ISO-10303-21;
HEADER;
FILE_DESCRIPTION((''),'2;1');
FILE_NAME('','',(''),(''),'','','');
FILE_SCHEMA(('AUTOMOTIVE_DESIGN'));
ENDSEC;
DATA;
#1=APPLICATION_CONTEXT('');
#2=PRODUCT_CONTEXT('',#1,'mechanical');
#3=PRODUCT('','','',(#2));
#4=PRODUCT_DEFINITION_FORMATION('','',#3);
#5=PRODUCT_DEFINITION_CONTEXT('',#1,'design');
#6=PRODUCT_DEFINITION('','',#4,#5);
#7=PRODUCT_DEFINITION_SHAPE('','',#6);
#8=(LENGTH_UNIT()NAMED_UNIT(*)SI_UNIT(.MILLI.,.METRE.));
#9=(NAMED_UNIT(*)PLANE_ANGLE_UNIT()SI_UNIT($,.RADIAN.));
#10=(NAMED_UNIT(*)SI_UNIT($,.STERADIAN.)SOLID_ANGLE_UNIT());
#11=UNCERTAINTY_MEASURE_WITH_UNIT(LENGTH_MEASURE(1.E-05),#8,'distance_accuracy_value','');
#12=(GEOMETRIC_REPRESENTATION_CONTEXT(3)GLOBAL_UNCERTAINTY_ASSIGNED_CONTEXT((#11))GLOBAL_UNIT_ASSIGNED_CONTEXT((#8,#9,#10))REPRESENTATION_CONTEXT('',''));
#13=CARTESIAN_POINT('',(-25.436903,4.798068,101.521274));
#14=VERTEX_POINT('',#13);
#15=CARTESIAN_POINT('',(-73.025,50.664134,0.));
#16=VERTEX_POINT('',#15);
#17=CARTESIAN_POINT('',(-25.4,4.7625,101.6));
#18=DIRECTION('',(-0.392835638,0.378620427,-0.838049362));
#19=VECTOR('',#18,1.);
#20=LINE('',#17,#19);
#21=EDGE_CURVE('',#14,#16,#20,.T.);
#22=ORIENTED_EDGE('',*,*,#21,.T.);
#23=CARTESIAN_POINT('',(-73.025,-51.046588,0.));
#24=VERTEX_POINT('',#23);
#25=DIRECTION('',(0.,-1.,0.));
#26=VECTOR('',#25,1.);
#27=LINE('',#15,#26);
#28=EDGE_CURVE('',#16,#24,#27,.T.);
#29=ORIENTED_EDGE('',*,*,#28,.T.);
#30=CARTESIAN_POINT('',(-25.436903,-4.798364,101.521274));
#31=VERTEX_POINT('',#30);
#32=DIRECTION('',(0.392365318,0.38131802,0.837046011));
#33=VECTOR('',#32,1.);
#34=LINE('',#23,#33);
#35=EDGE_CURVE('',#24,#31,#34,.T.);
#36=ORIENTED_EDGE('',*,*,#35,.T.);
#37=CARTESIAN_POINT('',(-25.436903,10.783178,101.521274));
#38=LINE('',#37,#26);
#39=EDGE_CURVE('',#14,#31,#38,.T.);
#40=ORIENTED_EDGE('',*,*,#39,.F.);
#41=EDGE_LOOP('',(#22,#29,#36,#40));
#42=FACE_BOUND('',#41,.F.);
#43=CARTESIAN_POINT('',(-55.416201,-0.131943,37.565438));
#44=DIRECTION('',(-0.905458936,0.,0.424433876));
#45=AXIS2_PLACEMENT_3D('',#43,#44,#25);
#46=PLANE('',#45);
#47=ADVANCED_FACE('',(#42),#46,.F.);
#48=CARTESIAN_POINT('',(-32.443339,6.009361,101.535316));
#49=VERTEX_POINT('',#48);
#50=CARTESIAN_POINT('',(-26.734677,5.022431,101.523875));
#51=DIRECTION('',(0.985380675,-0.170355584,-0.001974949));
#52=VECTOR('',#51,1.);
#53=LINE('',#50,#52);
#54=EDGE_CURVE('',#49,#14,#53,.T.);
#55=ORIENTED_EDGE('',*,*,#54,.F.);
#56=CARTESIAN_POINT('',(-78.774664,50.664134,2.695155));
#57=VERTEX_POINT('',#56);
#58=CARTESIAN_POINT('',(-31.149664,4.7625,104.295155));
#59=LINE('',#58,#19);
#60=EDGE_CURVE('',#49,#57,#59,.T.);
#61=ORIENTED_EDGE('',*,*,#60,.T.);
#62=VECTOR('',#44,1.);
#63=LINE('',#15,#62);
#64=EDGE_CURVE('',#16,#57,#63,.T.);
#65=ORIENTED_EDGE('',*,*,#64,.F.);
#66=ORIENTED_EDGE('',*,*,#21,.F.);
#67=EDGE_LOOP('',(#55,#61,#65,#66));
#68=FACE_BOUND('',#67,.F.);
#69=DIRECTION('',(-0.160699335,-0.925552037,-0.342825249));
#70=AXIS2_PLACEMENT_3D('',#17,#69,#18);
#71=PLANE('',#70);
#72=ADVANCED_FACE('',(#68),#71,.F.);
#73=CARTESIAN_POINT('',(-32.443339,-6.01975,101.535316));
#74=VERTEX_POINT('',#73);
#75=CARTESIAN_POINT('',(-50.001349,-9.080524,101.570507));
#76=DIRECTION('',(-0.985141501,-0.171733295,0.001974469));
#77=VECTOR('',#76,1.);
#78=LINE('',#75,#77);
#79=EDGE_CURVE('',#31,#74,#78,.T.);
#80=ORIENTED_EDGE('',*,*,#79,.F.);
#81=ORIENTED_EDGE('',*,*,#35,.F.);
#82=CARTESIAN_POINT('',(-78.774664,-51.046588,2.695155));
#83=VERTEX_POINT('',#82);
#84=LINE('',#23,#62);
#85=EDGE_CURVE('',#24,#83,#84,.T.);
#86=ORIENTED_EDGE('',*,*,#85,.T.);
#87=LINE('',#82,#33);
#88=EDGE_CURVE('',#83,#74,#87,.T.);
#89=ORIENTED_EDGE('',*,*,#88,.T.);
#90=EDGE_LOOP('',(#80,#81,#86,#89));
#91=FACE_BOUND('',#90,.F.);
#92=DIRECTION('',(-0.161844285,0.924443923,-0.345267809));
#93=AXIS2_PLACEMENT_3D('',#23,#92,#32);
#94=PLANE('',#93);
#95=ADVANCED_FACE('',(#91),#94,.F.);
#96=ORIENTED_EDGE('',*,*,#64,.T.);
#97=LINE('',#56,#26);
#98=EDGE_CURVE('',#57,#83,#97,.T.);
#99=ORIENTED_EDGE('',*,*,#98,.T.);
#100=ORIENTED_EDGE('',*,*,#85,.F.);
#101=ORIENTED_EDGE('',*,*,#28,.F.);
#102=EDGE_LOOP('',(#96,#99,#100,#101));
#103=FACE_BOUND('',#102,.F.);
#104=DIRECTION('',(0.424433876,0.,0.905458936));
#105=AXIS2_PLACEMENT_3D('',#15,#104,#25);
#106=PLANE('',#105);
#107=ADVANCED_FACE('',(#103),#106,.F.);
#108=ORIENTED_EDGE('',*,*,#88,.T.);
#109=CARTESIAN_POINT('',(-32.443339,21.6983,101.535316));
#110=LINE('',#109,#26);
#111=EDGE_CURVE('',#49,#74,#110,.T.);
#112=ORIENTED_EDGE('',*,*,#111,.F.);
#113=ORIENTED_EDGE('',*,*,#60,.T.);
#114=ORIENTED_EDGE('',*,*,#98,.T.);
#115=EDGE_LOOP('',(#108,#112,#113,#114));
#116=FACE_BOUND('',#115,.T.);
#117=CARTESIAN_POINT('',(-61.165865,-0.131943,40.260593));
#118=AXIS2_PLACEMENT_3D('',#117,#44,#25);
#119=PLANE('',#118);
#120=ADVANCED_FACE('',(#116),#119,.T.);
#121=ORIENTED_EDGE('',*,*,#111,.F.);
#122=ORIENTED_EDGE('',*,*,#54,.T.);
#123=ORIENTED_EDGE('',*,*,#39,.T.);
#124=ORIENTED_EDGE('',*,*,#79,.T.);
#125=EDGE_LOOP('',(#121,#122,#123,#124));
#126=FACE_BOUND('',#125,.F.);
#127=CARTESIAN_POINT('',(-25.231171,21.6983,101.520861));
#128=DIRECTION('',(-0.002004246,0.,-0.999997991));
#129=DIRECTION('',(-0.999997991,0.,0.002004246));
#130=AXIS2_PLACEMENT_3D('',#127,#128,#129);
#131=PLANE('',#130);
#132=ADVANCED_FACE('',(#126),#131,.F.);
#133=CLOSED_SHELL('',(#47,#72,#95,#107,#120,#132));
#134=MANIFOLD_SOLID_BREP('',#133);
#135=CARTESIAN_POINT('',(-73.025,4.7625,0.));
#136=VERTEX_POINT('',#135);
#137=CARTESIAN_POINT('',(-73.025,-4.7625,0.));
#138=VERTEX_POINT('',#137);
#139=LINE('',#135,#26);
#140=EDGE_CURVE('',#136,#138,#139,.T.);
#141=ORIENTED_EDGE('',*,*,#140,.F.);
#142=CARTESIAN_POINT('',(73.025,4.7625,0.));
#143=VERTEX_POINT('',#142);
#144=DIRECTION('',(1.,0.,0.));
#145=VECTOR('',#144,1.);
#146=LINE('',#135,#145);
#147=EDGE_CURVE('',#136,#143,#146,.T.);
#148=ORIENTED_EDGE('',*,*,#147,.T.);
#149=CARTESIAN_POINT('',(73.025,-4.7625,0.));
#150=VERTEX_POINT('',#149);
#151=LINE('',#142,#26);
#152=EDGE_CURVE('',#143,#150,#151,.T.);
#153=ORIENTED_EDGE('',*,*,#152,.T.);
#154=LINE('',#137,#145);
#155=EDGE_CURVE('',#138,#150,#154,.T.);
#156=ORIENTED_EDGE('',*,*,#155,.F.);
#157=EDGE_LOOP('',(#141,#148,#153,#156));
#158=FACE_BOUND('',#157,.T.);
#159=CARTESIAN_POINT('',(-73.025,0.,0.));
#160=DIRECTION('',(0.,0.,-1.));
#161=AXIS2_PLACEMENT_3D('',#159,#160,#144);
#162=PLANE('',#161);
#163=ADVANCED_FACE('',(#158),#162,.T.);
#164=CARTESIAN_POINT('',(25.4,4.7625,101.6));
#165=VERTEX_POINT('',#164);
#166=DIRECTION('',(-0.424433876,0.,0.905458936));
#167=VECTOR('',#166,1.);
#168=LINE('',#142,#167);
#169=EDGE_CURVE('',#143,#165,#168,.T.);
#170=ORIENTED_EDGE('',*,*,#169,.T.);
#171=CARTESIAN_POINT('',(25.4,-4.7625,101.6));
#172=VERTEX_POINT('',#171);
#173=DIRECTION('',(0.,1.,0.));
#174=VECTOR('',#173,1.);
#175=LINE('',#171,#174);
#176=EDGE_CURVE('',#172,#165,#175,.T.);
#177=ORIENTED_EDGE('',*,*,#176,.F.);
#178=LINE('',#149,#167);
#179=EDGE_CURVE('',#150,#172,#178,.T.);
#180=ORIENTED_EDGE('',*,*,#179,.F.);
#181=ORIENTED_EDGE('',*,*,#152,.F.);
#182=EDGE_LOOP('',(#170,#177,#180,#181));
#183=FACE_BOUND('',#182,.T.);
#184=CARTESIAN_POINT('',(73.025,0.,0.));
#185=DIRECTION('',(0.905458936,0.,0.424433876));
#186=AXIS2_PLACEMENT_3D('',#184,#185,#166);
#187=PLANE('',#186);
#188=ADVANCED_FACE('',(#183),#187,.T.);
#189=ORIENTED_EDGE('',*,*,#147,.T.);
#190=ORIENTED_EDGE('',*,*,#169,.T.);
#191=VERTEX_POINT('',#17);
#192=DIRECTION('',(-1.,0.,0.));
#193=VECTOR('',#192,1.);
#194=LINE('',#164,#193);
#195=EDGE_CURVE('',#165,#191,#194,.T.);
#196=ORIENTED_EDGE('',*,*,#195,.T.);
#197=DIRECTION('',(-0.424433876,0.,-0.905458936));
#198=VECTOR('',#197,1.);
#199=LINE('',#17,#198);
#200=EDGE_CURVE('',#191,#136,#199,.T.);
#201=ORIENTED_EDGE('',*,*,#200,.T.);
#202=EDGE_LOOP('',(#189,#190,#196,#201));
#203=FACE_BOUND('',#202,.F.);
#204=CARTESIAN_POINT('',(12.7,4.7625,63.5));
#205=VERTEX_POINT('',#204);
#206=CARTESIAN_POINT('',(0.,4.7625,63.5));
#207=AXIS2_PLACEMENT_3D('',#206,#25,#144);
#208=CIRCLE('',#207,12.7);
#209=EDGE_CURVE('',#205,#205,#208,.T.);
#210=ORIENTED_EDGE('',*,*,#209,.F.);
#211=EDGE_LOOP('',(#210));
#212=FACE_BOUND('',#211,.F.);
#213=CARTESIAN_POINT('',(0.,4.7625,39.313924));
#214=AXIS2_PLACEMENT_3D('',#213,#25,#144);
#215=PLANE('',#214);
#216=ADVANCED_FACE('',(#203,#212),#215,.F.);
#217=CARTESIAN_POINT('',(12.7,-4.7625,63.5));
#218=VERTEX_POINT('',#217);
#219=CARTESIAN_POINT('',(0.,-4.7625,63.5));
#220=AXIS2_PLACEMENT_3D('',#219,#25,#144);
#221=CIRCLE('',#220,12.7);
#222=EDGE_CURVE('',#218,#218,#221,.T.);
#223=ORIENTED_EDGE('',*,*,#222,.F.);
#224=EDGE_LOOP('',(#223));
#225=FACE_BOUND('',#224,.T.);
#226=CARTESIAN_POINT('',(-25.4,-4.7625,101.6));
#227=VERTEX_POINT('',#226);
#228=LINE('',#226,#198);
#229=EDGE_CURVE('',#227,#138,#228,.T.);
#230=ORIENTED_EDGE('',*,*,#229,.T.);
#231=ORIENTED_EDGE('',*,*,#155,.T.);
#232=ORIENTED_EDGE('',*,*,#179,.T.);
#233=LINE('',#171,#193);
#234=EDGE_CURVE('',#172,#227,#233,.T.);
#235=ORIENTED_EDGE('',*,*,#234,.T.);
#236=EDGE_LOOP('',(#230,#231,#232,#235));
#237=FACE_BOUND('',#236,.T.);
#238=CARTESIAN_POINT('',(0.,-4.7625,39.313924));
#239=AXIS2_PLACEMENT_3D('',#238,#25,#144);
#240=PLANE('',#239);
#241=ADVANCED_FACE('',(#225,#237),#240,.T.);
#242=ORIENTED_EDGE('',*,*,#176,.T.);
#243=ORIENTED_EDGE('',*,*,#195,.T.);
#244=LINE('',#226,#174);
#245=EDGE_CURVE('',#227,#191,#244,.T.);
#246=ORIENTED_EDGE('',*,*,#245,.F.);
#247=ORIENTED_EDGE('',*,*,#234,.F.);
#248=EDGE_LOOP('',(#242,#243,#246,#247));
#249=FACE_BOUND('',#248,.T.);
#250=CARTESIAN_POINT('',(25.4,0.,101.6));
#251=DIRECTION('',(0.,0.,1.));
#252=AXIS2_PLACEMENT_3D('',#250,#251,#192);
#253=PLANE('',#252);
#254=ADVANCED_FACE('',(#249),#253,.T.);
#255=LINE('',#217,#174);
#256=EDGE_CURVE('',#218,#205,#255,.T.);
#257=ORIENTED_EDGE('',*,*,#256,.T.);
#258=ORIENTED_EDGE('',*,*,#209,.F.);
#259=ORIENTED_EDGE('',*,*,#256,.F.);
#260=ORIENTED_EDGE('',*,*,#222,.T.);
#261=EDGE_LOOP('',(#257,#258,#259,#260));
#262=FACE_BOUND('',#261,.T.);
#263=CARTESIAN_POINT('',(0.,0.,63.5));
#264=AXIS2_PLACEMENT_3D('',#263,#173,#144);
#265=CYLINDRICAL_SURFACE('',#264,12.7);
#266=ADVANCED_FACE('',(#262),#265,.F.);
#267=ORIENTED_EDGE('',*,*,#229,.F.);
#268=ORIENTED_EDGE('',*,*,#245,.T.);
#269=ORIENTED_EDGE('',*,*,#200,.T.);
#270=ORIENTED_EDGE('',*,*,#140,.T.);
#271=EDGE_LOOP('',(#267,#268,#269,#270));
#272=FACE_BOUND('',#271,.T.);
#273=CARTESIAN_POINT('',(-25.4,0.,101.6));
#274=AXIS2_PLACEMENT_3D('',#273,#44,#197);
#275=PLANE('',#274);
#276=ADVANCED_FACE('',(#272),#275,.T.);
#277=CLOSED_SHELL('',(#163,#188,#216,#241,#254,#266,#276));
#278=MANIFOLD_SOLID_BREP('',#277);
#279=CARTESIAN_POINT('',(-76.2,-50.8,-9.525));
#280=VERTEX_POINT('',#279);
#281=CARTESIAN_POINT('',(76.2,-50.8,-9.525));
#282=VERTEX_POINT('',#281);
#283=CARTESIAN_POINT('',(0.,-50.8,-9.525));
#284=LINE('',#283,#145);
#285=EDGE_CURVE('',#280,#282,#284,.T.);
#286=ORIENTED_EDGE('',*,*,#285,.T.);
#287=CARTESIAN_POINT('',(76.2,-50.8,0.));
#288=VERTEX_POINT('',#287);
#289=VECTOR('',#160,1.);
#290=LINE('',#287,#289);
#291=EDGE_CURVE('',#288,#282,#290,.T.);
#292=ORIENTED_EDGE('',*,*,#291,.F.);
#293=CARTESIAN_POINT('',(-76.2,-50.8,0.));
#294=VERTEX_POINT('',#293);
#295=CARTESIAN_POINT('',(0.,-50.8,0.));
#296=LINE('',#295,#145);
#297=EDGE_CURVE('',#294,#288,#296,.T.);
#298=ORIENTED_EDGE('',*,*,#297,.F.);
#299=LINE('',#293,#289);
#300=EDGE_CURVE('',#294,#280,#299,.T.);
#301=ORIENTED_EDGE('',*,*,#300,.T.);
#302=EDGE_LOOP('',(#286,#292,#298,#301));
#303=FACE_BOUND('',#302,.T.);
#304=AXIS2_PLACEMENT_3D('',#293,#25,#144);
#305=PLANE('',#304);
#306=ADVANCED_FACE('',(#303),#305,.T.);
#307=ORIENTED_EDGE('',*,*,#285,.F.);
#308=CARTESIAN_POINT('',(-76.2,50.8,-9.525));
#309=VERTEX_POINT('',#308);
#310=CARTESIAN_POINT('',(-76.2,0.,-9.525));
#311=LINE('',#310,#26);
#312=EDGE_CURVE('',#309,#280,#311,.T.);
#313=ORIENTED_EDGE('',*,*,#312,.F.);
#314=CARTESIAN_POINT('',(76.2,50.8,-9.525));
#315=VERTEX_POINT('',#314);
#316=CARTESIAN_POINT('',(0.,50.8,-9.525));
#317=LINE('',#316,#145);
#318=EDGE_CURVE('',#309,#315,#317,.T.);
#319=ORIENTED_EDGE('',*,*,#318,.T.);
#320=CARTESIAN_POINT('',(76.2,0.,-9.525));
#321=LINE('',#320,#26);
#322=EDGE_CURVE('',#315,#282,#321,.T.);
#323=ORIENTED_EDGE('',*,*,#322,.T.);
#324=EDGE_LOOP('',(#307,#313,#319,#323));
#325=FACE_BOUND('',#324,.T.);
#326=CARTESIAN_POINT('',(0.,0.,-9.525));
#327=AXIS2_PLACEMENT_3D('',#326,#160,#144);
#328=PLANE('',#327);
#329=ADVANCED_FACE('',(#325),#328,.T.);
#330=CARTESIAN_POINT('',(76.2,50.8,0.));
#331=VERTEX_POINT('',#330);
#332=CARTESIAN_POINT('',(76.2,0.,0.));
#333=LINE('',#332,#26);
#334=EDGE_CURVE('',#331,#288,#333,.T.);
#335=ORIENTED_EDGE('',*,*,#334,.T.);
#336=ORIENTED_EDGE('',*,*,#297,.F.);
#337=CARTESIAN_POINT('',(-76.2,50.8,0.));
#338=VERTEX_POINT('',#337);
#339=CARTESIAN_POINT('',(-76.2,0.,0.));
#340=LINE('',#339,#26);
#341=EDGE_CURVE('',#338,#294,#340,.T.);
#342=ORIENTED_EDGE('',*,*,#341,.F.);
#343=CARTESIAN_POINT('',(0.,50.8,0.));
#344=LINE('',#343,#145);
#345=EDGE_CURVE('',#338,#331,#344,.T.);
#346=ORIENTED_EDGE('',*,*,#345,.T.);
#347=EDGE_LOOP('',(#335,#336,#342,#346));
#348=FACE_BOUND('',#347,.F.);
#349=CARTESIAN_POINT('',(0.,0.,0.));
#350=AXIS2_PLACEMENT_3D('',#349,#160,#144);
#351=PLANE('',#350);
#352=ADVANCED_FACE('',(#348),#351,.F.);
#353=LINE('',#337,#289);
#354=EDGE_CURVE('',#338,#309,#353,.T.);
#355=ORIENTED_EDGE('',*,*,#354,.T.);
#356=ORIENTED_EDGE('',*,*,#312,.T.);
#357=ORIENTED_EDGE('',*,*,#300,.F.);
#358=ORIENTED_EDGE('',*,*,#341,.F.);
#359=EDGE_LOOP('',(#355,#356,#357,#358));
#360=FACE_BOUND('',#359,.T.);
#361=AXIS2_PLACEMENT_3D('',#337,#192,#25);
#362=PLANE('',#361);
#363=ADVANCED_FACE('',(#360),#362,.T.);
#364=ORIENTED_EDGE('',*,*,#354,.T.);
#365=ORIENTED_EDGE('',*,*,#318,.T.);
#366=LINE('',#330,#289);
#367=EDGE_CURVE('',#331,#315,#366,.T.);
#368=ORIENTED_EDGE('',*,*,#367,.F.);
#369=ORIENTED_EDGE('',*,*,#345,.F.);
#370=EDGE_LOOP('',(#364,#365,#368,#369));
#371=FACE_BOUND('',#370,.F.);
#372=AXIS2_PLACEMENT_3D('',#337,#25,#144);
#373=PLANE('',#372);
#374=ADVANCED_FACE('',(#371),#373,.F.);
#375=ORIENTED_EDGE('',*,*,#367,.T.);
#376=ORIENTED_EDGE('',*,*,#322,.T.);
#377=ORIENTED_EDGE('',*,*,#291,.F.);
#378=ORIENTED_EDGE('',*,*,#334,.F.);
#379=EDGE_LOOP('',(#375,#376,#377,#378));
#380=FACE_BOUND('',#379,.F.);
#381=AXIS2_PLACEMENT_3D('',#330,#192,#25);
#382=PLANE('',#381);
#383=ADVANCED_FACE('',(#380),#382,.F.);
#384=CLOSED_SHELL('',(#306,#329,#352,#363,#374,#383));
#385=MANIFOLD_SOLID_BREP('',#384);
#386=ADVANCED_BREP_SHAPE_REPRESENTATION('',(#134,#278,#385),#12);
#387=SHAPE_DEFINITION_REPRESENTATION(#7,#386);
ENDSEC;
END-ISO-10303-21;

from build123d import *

# Parameters (mm, degrees)
F0_R        = 12.7
F1_DEPTH    = 4.7625
F2_W        = 152.4
F2_H        = 101.6
F3_DEPTH    = 9.525
F5_DEPTH    = 6.35
F6_T1_DEPTH = 43.3965999996


# Not quite as in the source:
# - a fillet or chamfer that OpenCascade refuses, or shapes differently, is made with other operations: its cross-section is extruded or revolved along the edge and cut away or added


with BuildPart() as f1:
    # F0 (on Front) → F1 (new body, symmetric)
    with BuildSketch(Plane.XZ):
        Polygon((-25.4, 101.6), (-73.025, 0), (73.025, 0), (25.4, 101.6), align=None)
        with Locations((0, 63.5)):
            Circle(F0_R, mode=Mode.SUBTRACT)
    extrude(amount=F1_DEPTH, both=True)


with BuildPart() as f3:
    # F2 (on face) → F3 (new body)
    with BuildSketch(Plane(origin=(0, 0, 0), x_dir=(1, 0, 0), z_dir=(0, 0, -1))):
        Rectangle(F2_W, F2_H)
    extrude(amount=F3_DEPTH)


with BuildPart() as f5:
    # F4 (on face) → F5 (new body)
    with BuildSketch(Plane(origin=(-59.8699759808, 0, 28.064051241), x_dir=(0, -1, 0), z_dir=(-0.905458936, 0, 0.4244338762))):
        Polygon((4.7625, 81.2140074372), (-4.7625, 81.2140074372), (-50.6641343236, -30.9942838117), (51.0465875268, -30.9942838117), align=None)
    extrude(amount=F5_DEPTH)

    # F6: chamfer of 3.048 x 6.5364570937 on 1 edges, made by hand

    # F6_s2 → F6_t1 (cut)
    with BuildSketch(Plane.XZ.offset(-21.6982999998)):
        Polygon((-25.2311707583, 101.520861293), (-32.4433386981, 101.5353162773), (-31.1496642433, 104.2951551141), align=None)
    extrude(amount=F6_T1_DEPTH, mode=Mode.SUBTRACT)


solid = Compound([f1.part, f3.part, f5.part])
